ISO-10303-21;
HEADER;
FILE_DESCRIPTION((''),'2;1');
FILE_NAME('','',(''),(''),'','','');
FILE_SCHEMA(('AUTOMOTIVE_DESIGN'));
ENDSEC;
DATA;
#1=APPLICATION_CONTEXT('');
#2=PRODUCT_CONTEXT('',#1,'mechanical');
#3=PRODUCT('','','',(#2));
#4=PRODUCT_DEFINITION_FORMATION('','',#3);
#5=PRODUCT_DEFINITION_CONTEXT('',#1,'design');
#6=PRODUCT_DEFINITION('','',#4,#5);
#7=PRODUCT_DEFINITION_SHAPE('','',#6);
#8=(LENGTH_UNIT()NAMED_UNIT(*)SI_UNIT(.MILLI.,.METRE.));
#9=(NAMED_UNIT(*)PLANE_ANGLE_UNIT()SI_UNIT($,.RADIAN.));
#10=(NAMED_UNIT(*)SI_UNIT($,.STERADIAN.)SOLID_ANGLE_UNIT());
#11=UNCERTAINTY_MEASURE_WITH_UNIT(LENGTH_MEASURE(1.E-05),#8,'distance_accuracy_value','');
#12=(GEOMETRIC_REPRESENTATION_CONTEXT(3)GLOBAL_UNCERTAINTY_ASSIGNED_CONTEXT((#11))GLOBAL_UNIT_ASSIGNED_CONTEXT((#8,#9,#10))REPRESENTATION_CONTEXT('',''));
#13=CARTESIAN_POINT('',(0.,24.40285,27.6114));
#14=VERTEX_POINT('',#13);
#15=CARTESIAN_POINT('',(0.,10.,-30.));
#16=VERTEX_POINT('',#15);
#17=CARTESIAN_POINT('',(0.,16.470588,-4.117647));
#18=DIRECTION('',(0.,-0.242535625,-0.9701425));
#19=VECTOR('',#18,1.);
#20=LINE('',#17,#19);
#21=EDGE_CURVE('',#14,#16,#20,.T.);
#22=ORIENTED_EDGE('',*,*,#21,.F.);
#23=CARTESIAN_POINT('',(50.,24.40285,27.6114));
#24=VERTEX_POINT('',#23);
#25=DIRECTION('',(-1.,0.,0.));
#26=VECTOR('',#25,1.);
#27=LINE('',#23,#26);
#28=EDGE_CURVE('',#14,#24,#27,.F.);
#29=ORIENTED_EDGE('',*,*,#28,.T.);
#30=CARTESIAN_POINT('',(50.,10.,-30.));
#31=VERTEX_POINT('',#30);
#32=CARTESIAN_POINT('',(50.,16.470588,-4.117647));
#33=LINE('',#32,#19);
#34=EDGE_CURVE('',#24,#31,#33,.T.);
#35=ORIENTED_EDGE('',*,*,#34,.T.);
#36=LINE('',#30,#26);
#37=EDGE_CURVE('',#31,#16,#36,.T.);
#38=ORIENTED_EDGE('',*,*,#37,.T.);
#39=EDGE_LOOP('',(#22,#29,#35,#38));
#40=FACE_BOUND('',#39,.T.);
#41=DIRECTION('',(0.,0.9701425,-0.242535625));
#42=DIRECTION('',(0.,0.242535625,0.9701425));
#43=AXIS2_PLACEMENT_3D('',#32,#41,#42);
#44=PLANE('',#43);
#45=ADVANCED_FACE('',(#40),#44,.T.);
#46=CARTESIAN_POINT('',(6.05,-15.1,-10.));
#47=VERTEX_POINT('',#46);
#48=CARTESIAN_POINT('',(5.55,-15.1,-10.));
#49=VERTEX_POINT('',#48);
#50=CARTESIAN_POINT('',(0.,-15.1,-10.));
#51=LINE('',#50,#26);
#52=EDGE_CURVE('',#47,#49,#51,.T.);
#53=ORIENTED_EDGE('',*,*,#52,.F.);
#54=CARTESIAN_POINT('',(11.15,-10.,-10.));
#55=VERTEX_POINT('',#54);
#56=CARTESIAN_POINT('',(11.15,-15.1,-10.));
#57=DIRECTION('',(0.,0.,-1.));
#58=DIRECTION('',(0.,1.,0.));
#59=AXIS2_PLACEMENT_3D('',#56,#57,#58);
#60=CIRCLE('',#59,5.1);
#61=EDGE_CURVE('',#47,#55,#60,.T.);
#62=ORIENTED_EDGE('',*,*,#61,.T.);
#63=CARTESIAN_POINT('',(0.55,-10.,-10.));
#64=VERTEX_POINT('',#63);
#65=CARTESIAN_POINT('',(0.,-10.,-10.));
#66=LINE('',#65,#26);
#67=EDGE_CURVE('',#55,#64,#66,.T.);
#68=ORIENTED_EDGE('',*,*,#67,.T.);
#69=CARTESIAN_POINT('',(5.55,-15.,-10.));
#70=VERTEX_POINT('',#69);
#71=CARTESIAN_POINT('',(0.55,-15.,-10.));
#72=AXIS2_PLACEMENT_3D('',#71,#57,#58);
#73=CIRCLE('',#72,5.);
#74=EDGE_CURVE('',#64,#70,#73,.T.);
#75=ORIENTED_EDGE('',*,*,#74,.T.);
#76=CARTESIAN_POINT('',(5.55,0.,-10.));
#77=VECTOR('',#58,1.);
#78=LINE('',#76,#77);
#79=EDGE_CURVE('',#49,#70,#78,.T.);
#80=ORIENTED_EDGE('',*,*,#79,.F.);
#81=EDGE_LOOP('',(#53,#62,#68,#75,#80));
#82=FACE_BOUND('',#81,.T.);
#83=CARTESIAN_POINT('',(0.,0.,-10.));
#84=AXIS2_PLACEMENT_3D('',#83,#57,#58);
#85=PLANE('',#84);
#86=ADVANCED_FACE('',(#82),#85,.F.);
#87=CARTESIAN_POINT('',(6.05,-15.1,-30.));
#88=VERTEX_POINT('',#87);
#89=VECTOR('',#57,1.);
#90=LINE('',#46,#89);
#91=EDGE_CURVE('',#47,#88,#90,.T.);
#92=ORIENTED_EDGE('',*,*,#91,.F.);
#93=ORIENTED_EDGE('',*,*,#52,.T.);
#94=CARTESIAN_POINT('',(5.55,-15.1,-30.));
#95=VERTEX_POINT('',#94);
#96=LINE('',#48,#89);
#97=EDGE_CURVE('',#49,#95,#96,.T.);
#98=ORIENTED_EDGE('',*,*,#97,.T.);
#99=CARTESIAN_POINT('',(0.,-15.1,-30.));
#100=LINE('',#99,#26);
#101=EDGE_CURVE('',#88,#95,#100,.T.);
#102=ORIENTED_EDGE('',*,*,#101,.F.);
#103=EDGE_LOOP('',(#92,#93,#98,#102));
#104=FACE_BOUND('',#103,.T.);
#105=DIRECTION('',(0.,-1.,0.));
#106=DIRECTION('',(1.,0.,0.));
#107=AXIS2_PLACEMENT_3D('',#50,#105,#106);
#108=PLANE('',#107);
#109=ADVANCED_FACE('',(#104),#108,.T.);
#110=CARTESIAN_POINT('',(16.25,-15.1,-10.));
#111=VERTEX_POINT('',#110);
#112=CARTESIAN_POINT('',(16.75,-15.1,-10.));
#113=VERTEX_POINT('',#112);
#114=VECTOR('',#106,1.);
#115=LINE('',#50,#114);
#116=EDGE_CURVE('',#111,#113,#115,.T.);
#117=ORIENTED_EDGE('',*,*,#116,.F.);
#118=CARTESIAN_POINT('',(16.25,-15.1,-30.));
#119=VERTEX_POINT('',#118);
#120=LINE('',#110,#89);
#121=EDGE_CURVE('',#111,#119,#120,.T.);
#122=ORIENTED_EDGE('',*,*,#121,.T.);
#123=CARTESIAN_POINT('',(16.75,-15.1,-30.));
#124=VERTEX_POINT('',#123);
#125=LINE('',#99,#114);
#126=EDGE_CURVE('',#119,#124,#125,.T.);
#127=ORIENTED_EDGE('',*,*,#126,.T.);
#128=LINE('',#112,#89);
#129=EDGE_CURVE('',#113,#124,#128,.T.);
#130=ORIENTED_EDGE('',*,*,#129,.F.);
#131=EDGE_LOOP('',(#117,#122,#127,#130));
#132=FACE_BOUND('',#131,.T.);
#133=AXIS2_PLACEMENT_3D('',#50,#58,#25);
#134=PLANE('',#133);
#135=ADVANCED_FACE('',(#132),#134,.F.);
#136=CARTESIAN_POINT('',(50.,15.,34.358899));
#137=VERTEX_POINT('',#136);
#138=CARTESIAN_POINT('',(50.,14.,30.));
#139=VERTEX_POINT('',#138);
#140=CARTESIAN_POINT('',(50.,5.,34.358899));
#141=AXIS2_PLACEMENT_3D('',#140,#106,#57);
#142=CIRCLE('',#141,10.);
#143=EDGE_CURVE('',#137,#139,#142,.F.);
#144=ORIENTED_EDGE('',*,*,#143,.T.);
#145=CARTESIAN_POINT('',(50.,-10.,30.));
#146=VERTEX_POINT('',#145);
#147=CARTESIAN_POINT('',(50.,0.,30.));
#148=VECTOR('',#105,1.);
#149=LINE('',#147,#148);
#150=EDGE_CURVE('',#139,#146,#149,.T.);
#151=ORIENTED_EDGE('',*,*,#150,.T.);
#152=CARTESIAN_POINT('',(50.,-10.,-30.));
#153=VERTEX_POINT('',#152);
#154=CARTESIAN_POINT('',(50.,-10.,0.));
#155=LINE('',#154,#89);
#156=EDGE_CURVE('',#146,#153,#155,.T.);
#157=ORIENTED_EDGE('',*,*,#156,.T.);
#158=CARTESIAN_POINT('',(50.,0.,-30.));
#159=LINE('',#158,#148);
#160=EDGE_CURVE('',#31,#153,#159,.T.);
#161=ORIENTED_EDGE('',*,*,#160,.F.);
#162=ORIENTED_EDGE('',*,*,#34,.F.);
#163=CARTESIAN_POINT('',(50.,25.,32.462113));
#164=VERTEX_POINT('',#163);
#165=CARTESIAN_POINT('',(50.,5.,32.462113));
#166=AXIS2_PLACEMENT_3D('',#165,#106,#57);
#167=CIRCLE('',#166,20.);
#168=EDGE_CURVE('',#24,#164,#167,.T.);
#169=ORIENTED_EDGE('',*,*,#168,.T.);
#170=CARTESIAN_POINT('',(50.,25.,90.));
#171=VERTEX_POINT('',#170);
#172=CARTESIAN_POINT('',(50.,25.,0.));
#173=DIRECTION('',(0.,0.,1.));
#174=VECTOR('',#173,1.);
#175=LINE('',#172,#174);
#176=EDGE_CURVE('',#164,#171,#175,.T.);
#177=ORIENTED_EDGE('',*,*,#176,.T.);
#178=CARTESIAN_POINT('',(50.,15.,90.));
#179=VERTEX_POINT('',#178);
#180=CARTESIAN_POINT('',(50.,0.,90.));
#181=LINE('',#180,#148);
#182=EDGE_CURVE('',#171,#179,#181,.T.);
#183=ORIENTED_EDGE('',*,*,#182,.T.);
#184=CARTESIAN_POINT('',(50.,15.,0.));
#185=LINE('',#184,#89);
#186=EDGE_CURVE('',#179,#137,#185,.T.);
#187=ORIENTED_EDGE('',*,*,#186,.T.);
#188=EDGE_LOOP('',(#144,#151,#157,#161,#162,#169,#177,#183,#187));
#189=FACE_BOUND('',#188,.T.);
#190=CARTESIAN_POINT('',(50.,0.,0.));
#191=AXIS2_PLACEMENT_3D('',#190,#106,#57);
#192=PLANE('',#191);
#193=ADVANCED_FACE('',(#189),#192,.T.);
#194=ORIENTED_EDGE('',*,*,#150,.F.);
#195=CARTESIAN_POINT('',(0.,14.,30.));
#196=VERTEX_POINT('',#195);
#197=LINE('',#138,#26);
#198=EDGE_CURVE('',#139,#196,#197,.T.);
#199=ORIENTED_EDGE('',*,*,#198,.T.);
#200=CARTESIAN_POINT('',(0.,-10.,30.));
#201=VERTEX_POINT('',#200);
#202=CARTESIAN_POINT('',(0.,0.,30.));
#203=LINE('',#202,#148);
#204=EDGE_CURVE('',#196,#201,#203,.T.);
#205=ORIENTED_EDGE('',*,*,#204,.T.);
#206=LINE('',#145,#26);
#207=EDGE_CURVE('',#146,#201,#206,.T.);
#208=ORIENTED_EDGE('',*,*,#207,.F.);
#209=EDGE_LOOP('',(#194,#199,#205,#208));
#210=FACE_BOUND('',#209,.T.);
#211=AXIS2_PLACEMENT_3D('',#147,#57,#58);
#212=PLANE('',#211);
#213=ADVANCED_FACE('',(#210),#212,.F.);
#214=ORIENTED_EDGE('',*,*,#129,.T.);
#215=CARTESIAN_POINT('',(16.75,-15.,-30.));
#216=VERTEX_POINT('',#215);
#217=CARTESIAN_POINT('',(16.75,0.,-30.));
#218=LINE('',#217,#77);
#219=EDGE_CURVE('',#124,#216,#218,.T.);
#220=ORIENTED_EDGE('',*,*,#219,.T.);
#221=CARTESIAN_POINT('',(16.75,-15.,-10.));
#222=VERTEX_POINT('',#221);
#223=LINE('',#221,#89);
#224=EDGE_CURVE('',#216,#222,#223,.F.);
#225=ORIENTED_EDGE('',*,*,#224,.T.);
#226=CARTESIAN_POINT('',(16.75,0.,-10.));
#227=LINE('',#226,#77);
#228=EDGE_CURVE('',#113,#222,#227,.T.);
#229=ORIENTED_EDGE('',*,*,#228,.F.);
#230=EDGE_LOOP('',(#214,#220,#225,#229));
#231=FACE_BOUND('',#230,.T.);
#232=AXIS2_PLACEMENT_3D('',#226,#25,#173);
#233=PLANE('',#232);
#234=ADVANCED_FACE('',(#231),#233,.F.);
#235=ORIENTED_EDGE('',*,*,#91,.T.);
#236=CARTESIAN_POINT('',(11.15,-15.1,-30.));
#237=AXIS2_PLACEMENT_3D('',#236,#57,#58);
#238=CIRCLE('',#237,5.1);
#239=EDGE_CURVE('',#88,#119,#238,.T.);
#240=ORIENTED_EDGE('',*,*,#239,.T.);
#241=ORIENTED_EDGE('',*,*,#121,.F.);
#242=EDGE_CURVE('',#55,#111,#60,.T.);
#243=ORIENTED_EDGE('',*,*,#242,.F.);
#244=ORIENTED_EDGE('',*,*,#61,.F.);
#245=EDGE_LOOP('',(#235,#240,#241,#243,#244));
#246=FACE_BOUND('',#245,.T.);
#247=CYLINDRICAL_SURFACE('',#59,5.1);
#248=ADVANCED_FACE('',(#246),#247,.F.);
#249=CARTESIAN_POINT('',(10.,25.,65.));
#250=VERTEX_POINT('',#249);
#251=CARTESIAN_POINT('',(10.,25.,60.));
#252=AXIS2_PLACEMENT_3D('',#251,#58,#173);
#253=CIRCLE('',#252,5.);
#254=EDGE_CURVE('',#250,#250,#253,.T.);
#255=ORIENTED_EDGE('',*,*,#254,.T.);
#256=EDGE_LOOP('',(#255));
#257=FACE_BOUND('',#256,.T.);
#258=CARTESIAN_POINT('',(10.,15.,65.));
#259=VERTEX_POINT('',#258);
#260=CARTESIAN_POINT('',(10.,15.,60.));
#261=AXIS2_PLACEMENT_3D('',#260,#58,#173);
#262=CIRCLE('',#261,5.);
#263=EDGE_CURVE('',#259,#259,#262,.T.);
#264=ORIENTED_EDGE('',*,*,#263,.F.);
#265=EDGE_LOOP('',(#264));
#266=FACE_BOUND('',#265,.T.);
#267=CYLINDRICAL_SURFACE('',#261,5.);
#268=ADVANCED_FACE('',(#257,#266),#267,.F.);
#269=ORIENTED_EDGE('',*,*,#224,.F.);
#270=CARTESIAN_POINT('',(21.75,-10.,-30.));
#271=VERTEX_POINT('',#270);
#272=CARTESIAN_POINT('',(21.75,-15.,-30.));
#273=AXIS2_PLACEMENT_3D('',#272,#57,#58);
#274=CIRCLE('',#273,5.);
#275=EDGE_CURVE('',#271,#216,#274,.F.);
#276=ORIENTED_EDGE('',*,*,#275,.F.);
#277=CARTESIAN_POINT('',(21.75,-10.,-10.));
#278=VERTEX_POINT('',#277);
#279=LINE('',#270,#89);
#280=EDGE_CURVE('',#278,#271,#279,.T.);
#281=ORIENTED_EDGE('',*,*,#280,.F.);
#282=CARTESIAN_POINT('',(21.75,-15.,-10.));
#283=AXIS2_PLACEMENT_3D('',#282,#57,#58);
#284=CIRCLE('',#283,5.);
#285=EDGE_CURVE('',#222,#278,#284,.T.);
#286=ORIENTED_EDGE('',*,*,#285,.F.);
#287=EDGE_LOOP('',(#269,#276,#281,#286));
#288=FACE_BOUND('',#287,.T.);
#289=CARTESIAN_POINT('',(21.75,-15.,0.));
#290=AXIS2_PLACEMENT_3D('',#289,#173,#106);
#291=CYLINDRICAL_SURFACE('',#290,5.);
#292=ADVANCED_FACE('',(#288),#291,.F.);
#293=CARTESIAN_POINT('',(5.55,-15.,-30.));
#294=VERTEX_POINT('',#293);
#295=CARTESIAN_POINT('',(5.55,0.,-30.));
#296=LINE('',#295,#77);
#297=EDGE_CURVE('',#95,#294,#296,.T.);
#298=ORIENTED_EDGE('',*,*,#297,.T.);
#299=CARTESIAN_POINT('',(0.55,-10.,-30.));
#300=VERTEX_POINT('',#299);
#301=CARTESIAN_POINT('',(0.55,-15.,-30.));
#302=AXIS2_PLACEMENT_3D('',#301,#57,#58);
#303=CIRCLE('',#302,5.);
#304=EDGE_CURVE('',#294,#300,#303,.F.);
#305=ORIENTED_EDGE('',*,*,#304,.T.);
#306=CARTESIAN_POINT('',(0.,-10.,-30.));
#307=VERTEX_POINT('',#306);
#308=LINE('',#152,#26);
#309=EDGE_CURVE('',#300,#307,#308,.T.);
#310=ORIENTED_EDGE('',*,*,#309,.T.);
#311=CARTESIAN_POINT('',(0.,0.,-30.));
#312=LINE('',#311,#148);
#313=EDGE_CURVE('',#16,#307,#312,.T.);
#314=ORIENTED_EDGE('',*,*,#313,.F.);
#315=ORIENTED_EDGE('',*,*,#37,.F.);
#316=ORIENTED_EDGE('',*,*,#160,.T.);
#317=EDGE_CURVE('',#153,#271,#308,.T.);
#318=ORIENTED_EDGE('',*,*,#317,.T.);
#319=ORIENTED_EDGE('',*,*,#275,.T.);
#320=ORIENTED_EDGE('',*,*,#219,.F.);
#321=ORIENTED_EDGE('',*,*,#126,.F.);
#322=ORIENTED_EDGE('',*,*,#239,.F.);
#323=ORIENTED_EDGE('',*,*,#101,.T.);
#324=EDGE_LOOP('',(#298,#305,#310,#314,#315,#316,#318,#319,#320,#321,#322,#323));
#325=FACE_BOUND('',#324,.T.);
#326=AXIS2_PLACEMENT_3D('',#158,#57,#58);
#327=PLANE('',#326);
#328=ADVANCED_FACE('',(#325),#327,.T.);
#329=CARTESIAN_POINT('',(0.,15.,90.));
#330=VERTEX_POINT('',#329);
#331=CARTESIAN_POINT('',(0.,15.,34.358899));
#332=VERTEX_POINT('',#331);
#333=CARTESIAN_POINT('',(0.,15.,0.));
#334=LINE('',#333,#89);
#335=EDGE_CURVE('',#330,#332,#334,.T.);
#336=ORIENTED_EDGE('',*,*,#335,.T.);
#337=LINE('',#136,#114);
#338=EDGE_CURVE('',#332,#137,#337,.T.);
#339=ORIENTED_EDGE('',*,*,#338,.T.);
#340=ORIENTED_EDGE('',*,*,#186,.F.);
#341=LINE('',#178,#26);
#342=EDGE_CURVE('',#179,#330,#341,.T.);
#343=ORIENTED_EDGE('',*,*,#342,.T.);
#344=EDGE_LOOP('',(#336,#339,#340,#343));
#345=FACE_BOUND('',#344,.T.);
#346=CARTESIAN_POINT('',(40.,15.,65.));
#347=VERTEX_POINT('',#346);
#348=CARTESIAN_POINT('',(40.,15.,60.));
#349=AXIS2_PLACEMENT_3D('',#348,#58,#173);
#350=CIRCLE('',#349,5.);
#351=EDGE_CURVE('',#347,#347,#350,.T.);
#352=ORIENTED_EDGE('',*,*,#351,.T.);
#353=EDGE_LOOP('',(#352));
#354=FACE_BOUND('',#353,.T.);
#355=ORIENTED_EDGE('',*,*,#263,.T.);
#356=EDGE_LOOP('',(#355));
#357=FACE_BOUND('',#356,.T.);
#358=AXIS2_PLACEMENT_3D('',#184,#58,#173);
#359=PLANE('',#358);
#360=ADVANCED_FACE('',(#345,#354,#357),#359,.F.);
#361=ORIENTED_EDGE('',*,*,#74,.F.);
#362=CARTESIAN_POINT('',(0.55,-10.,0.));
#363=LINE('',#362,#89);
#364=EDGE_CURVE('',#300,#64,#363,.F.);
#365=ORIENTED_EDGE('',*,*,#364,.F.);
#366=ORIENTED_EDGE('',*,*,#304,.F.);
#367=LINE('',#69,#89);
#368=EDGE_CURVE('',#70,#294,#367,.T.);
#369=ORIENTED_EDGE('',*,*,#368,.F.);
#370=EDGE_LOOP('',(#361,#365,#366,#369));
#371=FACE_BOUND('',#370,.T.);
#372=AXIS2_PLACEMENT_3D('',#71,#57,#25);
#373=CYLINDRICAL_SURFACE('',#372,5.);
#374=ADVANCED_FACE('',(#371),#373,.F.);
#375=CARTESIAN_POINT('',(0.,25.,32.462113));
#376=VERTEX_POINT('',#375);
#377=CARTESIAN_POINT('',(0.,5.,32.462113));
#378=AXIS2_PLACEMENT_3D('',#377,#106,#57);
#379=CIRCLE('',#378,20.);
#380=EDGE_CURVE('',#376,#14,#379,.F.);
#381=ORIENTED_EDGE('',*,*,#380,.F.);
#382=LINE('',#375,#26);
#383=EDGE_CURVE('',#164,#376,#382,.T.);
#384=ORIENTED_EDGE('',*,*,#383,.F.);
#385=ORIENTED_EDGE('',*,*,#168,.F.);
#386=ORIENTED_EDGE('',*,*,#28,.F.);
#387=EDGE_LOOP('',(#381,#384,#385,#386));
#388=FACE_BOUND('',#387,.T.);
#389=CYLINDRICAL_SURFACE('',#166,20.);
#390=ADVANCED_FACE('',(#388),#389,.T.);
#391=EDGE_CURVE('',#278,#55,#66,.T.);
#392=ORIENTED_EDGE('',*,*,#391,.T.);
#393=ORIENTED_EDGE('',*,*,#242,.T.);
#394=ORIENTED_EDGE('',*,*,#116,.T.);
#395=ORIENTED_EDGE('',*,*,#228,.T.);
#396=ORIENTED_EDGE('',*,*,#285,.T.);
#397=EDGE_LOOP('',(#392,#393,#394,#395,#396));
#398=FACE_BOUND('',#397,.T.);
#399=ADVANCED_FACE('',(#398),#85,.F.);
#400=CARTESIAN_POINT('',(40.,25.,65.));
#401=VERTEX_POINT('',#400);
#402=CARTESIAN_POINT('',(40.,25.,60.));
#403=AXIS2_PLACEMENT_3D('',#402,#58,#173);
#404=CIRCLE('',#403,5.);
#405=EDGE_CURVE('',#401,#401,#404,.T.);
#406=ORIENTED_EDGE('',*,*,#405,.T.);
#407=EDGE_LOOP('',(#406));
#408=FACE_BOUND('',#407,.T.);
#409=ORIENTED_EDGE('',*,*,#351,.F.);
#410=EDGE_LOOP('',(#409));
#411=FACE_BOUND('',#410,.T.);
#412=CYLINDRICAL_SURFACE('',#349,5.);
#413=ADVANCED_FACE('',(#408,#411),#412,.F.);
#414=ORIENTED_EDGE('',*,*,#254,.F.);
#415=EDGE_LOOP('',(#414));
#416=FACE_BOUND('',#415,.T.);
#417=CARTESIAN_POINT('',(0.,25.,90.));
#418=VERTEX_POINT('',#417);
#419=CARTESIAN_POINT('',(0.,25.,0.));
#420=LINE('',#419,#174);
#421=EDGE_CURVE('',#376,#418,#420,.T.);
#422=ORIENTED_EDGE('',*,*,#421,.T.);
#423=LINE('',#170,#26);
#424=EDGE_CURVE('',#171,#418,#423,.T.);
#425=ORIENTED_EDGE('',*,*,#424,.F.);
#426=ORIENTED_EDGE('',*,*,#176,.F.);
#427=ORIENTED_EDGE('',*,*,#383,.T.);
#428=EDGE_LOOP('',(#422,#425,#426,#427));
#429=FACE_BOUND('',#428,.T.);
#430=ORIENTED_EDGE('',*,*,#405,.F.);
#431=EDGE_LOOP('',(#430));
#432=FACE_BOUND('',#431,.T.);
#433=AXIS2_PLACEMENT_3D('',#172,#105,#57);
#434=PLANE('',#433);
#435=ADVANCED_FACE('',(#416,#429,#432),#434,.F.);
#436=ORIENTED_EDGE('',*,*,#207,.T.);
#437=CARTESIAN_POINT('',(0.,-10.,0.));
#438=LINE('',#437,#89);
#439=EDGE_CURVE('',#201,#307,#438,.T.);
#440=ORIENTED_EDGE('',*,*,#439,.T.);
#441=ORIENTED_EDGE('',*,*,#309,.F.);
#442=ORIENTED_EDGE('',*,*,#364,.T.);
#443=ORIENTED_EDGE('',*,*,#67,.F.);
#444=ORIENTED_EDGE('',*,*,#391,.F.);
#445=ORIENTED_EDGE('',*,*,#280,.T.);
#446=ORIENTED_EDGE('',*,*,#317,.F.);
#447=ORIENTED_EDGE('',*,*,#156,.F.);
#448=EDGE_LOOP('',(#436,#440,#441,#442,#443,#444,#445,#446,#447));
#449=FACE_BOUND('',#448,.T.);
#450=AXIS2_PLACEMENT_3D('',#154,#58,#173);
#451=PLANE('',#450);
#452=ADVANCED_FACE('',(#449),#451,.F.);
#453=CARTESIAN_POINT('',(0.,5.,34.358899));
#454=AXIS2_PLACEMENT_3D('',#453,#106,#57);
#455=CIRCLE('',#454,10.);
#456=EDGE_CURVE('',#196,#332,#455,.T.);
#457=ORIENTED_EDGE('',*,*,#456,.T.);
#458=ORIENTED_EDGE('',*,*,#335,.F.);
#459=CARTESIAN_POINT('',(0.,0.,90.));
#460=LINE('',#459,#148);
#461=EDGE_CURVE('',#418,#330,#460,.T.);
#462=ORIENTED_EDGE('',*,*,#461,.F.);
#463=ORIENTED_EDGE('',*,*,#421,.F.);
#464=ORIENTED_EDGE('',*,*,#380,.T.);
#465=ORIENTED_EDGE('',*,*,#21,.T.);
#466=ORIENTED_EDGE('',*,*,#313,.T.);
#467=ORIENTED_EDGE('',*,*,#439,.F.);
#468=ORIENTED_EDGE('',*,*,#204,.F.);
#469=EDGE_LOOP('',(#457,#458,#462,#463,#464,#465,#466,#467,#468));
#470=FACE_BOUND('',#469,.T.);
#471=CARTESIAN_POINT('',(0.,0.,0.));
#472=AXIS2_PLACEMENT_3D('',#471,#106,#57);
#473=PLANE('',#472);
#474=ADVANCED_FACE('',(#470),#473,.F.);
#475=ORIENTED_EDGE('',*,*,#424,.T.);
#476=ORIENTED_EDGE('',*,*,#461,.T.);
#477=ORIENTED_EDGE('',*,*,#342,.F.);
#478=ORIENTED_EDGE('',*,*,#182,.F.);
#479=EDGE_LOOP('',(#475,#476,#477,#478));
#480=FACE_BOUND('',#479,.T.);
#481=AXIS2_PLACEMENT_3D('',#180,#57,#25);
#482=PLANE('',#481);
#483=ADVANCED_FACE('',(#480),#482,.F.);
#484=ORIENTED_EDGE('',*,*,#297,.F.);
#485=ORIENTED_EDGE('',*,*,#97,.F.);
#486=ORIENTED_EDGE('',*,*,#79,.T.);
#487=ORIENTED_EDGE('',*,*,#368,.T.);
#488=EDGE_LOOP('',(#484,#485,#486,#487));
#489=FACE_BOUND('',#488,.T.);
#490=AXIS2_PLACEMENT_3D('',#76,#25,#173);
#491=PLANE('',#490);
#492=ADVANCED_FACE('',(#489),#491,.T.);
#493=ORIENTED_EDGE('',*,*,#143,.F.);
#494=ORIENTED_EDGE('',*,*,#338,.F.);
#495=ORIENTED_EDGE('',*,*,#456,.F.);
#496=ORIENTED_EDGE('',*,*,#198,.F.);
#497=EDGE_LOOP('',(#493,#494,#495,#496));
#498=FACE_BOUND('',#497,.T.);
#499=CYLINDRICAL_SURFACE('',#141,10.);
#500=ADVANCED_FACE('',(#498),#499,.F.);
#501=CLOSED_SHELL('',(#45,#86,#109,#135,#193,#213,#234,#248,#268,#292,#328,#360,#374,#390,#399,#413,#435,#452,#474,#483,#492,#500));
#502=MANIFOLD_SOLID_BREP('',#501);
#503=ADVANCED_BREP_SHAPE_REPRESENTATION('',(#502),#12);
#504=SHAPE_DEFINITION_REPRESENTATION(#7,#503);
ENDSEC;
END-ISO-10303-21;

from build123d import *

# Parameters (mm, degrees)
SKETCH1_W           = 60
SKETCH1_H           = 20
SKETCH1_H_2         = 10
BOSS_EXTRUDE1_DEPTH = 50
FILLET1_R           = 20
BOSS_EXTRUDE2_DEPTH = 50
FILLET2_R           = 10
BOSS_EXTRUDE3_DEPTH = 20
FILLET3_R           = 5
SKETCH4_R           = 5
CUT_EXTRUDE1_DEPTH  = 10


with BuildPart() as part:
    # Sketch1 → Boss-Extrude1 (new body)
    with BuildSketch(Plane(origin=(0, 0, 0), x_dir=(0, 0, -1), z_dir=(1, 0, 0))):
        Rectangle(SKETCH1_W, SKETCH1_H)
        Polygon((-30, 25), (30, 10), (-30, 10), align=None)
        with Locations((-60, 20)):
            Rectangle(SKETCH1_W, SKETCH1_H_2)
    extrude(amount=BOSS_EXTRUDE1_DEPTH)

    # Fillet1
    fillet1_edges = [part.edges().sort_by_distance(p)[0] for p in [
        (25, 25, 30),
    ]]
    fillet(fillet1_edges, radius=FILLET1_R)

    # Sketch2 → Boss-Extrude2 (add)
    with BuildSketch(Plane.ZY):
        Polygon((30, 15), (30, 14), (31, 15), align=None)
    extrude(amount=-BOSS_EXTRUDE2_DEPTH)

    # Fillet2
    # the kernel refuses this fillet: 10 mm, written as the material it adds along each edge
    with BuildSketch(Plane(origin=(0, 15, 31), x_dir=(0, 0, 1), z_dir=(1, 0, 0))) as fillet2_piece_1:
        with BuildLine():
            CenterArc((3.358898944, 10), FILLET2_R, 244.158067237, 25.841932763)
            Line((-1, 1), (-1.087177979, 0.82))
            ThreePointArc((-1.087177979, 0.82), (-0.641421356, 0.358578644), (-0.141421356, -0.141421356))
            Line((-0.141421356, -0.141421356), (0, -0.2))
            Line((0, -0.2), (3.358898944, -0.2))
            Line((3.358898944, -0.2), (3.358898944, 0))
        make_face()
    extrude(amount=50)

    # Sketch3 → Boss-Extrude3 (add)
    with BuildSketch(Plane(origin=(0, 0, -30), x_dir=(-1, 0, 0), z_dir=(0, 0, -1))):
        with BuildLine():
            Line((-5.55, -10), (-11.149999969, -10))
            ThreePointArc((-11.149999969, -10), (-7.543755405, -11.493755427), (-6.05, -15.1))
            Line((-6.05, -15.1), (-5.55, -15.1))
            Line((-5.55, -15.1), (-5.55, -10))
        make_face()
        with BuildLine():
            Line((-16.75, -15.1), (-16.25, -15.1))
            ThreePointArc((-16.25, -15.1), (-14.756244573, -11.493755405), (-11.149999969, -10))
            Line((-11.149999969, -10), (-16.75, -10))
            Line((-16.75, -10), (-16.75, -15.1))
        make_face()
    extrude(amount=-BOSS_EXTRUDE3_DEPTH)

    # Fillet3
    fillet3_edges = [part.edges().sort_by_distance(p)[0] for p in [
        (5.55, -10, -20),
        (16.75, -10, -20),
    ]]
    fillet(fillet3_edges, radius=FILLET3_R)

    # Sketch4 → Cut-Extrude1 (cut)
    with BuildSketch(Plane(origin=(0, 25, 0), x_dir=(1, 0, 0), z_dir=(0, 1, 0))):
        with Locations(Location((10, -60, 0), (0, 0, 270))):
            Circle(SKETCH4_R)
        with Locations(Location((40, -60, 0), (0, 0, 270))):
            Circle(SKETCH4_R)
    extrude(amount=-CUT_EXTRUDE1_DEPTH, mode=Mode.SUBTRACT)


solid = part.part
